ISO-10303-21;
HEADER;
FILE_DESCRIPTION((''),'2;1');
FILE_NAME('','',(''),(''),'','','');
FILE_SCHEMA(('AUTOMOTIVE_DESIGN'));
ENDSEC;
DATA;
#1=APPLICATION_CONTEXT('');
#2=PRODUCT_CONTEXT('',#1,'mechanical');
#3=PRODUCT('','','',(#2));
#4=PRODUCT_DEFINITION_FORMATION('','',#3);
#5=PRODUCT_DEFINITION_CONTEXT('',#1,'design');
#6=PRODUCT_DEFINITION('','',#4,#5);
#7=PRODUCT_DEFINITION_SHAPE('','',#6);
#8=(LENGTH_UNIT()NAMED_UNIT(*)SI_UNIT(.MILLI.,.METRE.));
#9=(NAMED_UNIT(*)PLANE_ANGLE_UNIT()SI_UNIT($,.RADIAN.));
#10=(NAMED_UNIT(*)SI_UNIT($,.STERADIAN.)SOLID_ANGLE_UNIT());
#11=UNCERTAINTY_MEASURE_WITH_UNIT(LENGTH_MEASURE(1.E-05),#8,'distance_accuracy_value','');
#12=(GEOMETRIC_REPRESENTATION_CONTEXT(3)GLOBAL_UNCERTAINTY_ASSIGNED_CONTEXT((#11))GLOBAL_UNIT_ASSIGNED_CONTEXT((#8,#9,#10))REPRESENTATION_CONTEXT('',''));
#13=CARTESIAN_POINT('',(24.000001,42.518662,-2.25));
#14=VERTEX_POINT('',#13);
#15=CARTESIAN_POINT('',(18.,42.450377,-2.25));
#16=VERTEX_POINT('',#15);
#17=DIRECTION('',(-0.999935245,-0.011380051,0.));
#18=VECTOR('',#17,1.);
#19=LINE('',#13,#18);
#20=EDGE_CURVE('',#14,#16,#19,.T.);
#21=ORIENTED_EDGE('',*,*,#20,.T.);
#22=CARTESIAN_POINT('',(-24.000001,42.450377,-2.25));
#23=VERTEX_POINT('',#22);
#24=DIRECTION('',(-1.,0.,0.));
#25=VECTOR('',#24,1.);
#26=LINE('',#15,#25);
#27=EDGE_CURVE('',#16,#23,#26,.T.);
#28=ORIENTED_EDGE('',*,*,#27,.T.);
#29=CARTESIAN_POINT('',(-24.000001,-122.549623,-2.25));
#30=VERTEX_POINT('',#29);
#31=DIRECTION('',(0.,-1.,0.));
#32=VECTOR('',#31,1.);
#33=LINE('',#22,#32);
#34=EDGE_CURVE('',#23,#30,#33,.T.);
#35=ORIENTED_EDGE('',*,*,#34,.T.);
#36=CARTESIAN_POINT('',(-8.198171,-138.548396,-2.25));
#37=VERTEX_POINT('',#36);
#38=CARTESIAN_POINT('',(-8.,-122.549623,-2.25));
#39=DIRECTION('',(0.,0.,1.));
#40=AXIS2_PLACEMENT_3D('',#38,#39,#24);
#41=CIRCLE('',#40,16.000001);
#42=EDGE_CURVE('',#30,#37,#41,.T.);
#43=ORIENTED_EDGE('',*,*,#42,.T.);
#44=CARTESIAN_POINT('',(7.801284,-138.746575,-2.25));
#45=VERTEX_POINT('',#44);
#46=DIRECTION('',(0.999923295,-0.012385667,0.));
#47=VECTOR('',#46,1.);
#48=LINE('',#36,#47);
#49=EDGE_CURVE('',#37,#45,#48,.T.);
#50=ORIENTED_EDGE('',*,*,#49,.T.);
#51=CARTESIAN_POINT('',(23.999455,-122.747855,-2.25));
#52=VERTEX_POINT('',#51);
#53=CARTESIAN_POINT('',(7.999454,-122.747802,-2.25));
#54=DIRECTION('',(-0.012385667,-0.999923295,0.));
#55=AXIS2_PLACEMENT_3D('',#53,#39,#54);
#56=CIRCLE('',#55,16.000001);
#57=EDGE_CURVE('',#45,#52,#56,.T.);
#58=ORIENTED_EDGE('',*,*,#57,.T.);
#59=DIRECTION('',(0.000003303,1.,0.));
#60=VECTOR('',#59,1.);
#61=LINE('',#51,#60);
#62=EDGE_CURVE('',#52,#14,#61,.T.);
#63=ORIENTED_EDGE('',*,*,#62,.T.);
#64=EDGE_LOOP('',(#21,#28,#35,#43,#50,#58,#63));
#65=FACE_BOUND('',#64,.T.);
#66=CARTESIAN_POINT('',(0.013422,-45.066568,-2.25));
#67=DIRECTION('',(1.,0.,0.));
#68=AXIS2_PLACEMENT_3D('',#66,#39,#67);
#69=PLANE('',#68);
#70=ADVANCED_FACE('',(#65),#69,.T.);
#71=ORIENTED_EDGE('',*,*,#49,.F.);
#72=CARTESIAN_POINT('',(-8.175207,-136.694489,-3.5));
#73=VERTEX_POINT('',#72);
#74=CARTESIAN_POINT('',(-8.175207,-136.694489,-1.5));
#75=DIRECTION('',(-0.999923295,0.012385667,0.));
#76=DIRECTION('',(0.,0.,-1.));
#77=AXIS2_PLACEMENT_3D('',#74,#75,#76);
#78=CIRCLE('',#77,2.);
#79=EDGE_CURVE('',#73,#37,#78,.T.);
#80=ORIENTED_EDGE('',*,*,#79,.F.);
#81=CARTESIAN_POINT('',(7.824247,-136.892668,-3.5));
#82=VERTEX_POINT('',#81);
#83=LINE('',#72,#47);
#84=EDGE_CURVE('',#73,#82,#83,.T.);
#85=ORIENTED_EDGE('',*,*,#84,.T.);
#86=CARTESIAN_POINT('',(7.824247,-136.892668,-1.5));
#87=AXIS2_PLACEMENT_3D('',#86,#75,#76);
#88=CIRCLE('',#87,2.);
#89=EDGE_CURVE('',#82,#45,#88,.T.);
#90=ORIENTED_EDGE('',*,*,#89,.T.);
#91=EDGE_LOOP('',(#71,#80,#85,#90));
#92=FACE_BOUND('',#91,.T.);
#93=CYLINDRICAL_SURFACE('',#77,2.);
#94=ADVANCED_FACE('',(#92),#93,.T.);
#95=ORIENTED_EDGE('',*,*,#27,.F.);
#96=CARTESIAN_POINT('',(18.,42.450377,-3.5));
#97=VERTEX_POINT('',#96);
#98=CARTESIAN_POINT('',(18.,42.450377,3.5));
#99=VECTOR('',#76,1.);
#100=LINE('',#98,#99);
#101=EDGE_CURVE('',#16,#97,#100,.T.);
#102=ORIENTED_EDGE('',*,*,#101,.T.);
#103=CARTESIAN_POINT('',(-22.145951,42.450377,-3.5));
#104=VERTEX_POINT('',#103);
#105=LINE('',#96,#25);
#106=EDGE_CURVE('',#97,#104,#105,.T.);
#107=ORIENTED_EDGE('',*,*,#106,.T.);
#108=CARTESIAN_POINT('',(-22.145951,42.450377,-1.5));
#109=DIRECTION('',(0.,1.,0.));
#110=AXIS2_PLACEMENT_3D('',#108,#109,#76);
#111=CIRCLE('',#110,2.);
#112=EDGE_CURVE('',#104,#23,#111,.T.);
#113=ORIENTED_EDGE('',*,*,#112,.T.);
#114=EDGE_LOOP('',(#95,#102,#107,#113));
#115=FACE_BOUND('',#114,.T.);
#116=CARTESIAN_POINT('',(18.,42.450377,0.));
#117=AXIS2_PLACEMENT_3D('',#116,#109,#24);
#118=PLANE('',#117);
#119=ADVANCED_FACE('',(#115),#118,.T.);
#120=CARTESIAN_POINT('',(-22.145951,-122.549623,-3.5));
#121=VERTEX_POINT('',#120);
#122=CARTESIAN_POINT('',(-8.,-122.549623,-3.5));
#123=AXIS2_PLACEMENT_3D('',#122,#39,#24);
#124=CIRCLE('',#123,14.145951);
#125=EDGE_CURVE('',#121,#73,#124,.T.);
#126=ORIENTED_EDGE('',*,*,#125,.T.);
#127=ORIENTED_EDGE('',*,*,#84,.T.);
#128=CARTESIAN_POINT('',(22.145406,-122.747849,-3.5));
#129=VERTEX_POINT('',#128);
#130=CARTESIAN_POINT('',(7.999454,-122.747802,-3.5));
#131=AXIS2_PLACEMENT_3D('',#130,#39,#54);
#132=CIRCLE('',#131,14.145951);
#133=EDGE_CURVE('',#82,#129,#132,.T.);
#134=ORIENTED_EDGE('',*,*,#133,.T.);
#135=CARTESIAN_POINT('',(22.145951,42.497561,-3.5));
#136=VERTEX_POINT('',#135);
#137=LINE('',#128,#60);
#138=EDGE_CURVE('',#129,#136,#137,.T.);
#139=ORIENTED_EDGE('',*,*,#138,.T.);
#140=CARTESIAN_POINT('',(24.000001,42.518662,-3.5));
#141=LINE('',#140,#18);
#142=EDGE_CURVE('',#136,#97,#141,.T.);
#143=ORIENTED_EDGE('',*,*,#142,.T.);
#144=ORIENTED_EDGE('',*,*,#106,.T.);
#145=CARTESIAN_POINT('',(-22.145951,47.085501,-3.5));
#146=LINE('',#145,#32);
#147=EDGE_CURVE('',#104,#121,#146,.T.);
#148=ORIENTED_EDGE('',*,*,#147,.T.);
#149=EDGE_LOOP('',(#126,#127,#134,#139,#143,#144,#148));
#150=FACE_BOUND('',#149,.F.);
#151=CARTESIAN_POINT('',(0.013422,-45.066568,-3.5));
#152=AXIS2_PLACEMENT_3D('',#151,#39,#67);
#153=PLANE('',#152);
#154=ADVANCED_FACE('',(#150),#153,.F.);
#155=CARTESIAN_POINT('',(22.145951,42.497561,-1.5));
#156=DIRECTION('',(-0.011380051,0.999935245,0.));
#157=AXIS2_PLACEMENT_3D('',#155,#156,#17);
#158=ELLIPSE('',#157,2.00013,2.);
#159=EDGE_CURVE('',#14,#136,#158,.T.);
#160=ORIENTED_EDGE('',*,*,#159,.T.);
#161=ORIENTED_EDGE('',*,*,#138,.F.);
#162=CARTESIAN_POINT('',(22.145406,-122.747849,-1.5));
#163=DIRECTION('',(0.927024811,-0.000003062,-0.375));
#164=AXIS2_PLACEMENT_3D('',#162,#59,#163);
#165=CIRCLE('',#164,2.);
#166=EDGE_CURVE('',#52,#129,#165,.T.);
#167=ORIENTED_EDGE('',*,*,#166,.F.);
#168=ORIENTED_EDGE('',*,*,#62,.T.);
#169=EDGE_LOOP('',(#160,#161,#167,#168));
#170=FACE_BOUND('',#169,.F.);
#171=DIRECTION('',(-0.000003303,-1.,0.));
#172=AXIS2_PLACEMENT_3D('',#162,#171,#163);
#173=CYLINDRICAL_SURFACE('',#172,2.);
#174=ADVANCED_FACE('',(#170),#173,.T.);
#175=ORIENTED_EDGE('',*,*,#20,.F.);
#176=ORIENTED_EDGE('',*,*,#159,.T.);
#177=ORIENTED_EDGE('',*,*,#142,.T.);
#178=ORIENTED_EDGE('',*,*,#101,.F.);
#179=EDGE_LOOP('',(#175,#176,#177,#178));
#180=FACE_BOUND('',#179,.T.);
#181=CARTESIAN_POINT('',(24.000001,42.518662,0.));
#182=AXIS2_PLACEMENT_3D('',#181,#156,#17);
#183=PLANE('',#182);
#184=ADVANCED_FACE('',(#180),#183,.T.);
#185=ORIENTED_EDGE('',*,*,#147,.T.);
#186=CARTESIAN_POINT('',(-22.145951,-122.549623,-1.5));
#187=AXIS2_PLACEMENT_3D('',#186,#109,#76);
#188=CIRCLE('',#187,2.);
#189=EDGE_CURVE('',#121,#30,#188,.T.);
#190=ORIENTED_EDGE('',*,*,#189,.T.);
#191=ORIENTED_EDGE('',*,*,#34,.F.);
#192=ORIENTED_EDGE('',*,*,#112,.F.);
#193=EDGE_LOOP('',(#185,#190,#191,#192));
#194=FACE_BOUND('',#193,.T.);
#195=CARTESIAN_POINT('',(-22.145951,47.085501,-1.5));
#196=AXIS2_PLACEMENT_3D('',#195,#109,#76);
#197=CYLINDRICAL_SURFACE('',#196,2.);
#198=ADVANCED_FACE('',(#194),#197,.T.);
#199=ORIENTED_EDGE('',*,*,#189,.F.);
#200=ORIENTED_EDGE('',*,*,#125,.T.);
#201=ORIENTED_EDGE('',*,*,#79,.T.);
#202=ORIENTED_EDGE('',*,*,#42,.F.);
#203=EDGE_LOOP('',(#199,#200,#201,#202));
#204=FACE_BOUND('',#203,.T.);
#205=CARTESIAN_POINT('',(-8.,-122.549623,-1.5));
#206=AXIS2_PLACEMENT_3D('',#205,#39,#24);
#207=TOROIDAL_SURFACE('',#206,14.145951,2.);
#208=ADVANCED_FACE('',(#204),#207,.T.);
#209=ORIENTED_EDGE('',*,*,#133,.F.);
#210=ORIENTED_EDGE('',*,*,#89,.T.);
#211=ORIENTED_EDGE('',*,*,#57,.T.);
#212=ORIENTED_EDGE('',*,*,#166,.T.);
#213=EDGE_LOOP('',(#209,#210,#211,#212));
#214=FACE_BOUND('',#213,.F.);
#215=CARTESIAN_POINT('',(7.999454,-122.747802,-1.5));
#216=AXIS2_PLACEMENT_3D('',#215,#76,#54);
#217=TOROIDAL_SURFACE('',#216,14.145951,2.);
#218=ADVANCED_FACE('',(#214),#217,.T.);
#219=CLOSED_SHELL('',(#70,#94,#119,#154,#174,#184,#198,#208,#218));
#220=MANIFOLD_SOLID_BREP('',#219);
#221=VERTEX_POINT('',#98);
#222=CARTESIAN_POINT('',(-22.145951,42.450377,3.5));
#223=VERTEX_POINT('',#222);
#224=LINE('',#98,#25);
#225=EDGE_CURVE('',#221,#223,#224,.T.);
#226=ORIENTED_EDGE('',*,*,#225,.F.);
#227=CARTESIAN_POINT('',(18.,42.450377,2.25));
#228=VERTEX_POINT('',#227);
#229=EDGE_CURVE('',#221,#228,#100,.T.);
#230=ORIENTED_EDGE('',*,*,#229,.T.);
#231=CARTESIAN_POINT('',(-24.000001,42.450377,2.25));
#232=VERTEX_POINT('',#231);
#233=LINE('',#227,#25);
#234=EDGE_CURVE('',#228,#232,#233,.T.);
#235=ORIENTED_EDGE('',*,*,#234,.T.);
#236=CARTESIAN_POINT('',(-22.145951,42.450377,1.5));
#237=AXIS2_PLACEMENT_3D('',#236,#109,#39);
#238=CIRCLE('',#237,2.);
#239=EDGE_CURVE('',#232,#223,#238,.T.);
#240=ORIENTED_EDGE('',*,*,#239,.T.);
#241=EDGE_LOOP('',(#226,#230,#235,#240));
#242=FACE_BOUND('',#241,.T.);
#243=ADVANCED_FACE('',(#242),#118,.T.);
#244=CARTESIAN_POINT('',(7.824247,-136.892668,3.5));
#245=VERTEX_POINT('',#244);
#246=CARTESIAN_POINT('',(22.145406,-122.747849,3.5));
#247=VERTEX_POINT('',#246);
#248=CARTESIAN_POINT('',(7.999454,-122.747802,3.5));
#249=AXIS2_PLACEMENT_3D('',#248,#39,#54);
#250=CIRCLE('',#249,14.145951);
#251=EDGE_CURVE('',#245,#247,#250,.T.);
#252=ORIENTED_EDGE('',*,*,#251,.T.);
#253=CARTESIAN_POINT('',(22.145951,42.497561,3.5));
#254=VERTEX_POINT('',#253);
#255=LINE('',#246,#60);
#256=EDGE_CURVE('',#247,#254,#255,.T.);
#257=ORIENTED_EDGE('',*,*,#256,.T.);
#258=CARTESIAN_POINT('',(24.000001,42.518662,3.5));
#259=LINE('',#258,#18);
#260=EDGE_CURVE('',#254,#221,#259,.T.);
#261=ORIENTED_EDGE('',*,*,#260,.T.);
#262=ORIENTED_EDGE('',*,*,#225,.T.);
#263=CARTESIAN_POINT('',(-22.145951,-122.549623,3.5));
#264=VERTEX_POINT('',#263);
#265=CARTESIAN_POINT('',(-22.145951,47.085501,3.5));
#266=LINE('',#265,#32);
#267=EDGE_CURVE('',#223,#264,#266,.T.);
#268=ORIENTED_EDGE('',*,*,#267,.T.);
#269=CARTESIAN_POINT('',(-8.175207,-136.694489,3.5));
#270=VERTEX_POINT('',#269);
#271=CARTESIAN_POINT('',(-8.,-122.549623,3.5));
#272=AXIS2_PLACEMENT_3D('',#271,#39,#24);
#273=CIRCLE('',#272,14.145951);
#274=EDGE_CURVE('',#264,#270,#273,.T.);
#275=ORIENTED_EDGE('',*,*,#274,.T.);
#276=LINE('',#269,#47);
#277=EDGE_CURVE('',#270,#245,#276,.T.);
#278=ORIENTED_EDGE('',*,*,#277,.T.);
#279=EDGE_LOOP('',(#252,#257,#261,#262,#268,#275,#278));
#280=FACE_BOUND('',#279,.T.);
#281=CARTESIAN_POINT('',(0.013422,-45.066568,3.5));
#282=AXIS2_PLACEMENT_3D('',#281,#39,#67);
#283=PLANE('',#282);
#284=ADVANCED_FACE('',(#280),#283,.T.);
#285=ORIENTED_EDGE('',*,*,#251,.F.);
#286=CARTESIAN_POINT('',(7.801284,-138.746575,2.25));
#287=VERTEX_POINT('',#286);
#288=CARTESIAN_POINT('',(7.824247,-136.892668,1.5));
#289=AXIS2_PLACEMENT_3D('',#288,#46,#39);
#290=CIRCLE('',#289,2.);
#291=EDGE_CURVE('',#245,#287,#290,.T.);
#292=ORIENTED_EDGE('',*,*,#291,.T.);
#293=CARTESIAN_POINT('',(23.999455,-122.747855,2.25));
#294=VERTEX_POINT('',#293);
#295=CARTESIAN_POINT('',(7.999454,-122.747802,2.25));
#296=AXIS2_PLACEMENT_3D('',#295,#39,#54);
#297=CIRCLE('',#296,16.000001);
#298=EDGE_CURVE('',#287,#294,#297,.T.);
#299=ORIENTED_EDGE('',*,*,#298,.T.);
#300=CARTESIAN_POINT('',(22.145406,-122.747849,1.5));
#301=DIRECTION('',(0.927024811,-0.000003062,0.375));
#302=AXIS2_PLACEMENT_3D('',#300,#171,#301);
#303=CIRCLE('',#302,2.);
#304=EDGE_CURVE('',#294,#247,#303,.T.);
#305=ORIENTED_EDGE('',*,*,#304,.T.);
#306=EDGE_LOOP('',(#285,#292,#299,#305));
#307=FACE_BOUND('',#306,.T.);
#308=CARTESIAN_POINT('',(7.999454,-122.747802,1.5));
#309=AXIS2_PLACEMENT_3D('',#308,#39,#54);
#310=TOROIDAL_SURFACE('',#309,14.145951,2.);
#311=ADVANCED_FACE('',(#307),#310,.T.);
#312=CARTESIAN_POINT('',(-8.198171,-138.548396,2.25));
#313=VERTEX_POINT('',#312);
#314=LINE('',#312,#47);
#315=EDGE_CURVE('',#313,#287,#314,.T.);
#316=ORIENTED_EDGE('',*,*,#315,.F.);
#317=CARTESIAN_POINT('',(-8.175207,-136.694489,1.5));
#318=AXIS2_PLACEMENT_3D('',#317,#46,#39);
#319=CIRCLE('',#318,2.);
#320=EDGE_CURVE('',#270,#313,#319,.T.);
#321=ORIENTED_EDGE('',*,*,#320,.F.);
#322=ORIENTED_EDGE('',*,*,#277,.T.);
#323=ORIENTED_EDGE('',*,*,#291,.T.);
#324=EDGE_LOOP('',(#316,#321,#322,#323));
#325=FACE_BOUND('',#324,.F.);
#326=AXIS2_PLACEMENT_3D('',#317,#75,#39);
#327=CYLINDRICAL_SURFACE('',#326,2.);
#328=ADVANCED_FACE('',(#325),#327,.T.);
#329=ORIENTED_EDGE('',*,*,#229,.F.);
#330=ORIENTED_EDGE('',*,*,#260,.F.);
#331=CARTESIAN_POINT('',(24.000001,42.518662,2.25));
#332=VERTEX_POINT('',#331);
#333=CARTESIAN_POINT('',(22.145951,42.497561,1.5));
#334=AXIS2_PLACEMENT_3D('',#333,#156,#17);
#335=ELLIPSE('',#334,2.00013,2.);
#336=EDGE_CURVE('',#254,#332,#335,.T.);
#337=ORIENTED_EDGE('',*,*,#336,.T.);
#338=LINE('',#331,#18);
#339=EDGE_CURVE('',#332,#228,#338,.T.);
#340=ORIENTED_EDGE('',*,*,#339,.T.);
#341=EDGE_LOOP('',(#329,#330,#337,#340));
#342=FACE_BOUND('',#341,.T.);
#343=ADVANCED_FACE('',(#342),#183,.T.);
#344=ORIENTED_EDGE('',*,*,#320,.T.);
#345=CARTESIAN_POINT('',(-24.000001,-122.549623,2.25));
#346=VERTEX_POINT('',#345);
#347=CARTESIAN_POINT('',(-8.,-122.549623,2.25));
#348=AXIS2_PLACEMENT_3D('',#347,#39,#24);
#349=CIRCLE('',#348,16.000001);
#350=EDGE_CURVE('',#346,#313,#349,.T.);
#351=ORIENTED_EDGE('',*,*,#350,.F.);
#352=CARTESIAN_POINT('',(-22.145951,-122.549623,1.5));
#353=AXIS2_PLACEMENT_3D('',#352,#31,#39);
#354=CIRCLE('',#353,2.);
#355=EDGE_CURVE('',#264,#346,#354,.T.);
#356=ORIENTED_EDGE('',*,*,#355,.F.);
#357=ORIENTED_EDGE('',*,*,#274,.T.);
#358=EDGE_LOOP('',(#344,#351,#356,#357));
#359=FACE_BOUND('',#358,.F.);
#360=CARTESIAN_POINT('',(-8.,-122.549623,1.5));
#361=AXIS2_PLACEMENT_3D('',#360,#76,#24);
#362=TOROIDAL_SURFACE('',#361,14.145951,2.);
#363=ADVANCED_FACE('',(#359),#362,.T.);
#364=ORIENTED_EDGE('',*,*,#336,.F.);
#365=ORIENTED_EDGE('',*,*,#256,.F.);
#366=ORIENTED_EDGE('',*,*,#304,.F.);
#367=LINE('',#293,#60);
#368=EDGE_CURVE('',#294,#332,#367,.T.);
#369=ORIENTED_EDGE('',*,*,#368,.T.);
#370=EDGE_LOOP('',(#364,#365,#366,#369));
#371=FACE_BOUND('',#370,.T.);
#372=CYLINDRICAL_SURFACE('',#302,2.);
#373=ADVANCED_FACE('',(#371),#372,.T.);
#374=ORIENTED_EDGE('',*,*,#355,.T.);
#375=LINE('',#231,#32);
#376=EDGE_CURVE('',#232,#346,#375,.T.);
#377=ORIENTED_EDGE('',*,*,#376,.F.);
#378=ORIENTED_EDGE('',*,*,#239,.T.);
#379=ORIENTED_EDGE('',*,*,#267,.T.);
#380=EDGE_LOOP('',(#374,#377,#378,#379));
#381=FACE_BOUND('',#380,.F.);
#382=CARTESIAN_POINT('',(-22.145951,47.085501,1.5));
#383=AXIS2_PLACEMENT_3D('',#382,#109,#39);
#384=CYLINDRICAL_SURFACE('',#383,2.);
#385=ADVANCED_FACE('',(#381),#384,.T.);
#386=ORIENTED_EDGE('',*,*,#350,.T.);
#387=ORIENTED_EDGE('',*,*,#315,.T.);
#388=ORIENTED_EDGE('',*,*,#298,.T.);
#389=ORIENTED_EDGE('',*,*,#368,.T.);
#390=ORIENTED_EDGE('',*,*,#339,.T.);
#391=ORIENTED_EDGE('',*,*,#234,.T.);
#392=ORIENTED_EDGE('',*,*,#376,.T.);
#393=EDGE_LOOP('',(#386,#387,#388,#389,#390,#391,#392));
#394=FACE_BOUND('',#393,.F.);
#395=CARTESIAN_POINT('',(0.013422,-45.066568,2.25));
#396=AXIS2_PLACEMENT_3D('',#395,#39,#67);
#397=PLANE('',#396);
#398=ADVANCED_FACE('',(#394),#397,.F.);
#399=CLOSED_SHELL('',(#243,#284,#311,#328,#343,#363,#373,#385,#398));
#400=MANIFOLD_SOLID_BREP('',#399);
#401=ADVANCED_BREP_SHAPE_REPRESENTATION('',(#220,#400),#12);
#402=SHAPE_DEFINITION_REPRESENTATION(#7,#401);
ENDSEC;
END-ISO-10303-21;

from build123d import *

# Parameters (mm, degrees)
F1_DEPTH        = 3.5
F2_DEPTH        = 2.25
F3_T1_DEPTH     = 169.9016407579
F3_T3_DEPTH     = 16.0006816658
F3_T5_DEPTH     = 169.6351240544
F3_T8_ANGLE     = 90.7094753215
F3_T10_ANGLE    = 89.290335423
F3_S1_T1_DEPTH  = 169.9016407579
F3_S1_T3_DEPTH  = 16.0006816658
F3_S1_T5_DEPTH  = 169.6351240544
F3_S1_T8_ANGLE  = 90.7094753215
F3_S1_T10_ANGLE = 89.290335423


# Not quite as in the source:
# - a fillet or chamfer that OpenCascade refuses, or shapes differently, is made with other operations: its cross-section is extruded or revolved along the edge and cut away or added


with BuildPart() as f1:
    # F0 (on Top) → F1 (new body, symmetric)
    with BuildSketch(Plane.XY):
        with BuildLine():
            Line((18, 42.4503772799), (-18, 42.4503772799))
            Line((-18, 42.4503772799), (-24.0000008941, 42.4503772799))
            Line((-24.0000008941, 42.4503772799), (-24.0000008941, -122.5496227201))
            ThreePointArc((-24.0000008941, -122.5496227201), (-19.3835574329, -133.7930496347), (-8.1981706793, -138.5483963291))
            Line((-8.1981706793, -138.5483963291), (7.8012836493, -138.7465754402))
            ThreePointArc((7.8012836493, -138.7465754402), (19.2428624423, -134.1313778333), (23.9994552225, -122.7478546813))
            Line((23.9994552225, -122.7478546813), (24.0000011197, 42.5186620212))
            Line((24.0000011197, 42.5186620212), (18, 42.4503772799))
        make_face()
    extrude(amount=F1_DEPTH, both=True)

    # F0 (on Top) → F2 (cut, symmetric)
    with BuildSketch(Plane.XY):
        with BuildLine():
            Line((18, 42.4503772799), (-18, 42.4503772799))
            Line((-18, 42.4503772799), (-24.0000008941, 42.4503772799))
            Line((-24.0000008941, 42.4503772799), (-24.0000008941, -122.5496227201))
            ThreePointArc((-24.0000008941, -122.5496227201), (-19.3835574329, -133.7930496347), (-8.1981706793, -138.5483963291))
            Line((-8.1981706793, -138.5483963291), (7.8012836493, -138.7465754402))
            ThreePointArc((7.8012836493, -138.7465754402), (19.2428624423, -134.1313778333), (23.9994552225, -122.7478546813))
            Line((23.9994552225, -122.7478546813), (24.0000011197, 42.5186620212))
            Line((24.0000011197, 42.5186620212), (18, 42.4503772799))
        make_face()
    extrude(amount=F2_DEPTH, both=True, mode=Mode.SUBTRACT)

    # F3: fillet of radius 2 on 1 edges, made by hand

    # F3_s2 → F3_t1 (cut)
    with BuildSketch(Plane(origin=(-0.0004054521, -122.7477754066, 0), x_dir=(0, 0, 1), z_dir=(3.3031e-06, 1, 0))):
        with BuildLine():
            ThreePointArc((-2.25, 23.9998606748), (-3.1583123952, 23.2638450417), (-3.5, 22.145811053))
            Line((-3.5, 22.145811053), (-3.5, 23.9998606748))
            Line((-3.5, 23.9998606748), (-2.25, 23.9998606748))
        make_face()
    extrude(amount=F3_T1_DEPTH, mode=Mode.SUBTRACT)

    # F3_s4 → F3_t3 (cut)
    with BuildSketch(Plane(origin=(-6.4810304011, 0.0802780406, 0), x_dir=(0, 0, 1), z_dir=(0.9999232947, -0.0123856668, 0))):
        with BuildLine():
            ThreePointArc((-3.5, 136.7852591194), (-3.1583123952, 137.9032931082), (-2.25, 138.6393087412))
            Line((-2.25, 138.6393087412), (-3.5, 138.6393087412))
            Line((-3.5, 138.6393087412), (-3.5, 136.7852591194))
        make_face()
    extrude(amount=F3_T3_DEPTH, mode=Mode.SUBTRACT)

    # F3_s6 → F3_t5 (cut)
    with BuildSketch(Plane.XZ.offset(-47.0855013343)):
        with BuildLine():
            ThreePointArc((-22.1459512723, -3.5), (-23.263985261, -3.1583123952), (-24.0000008941, -2.25))
            Line((-24.0000008941, -2.25), (-24.0000008941, -3.5))
            Line((-24.0000008941, -3.5), (-22.1459512723, -3.5))
        make_face()
    extrude(amount=F3_T5_DEPTH, mode=Mode.SUBTRACT)

    # F3_s7 → F3_t8 (revolve, cut)
    with BuildSketch(Plane(origin=(9.5184239274, -0.1179010705, 0), x_dir=(0, 0, 1), z_dir=(-0.9999232947, 0.0123856668, 0))):
        with BuildLine():
            ThreePointArc((-2.25, -138.6393087412), (-3.1583123952, -137.9032931082), (-3.5, -136.7852591194))
            Line((-3.5, -136.7852591194), (-3.5, -138.6393087412))
            Line((-3.5, -138.6393087412), (-2.25, -138.6393087412))
        make_face()
    revolve(axis=Axis((7.9994543285, -122.7478018312, -3.5), (0, 0, 1)), revolution_arc=F3_T8_ANGLE, mode=Mode.SUBTRACT)

    # F3_s9 → F3_t10 (revolve, cut)
    with BuildSketch(Plane.XZ.offset(122.5496227201)):
        with BuildLine():
            ThreePointArc((-22.1459512723, -3.5), (-23.263985261, -3.1583123952), (-24.0000008941, -2.25))
            Line((-24.0000008941, -2.25), (-24.0000008941, -3.5))
            Line((-24.0000008941, -3.5), (-22.1459512723, -3.5))
        make_face()
    revolve(axis=Axis((-8, -122.5496227201, -3.5), (0, 0, 1)), revolution_arc=F3_T10_ANGLE, mode=Mode.SUBTRACT)

    # F3#s1: fillet of radius 2 on 1 edges, made by hand

    # F3_s1_s2 → F3_s1_t1 (cut)
    with BuildSketch(Plane(origin=(-0.0004054521, -122.7477754066, 0), x_dir=(0, 0, 1), z_dir=(3.3031e-06, 1, 0))):
        with BuildLine():
            ThreePointArc((2.25, 23.9998606748), (3.1583123952, 23.2638450417), (3.5, 22.145811053))
            Line((3.5, 22.145811053), (3.5, 23.9998606748))
            Line((3.5, 23.9998606748), (2.25, 23.9998606748))
        make_face()
    extrude(amount=F3_S1_T1_DEPTH, mode=Mode.SUBTRACT)

    # F3_s1_s4 → F3_s1_t3 (cut)
    with BuildSketch(Plane(origin=(-6.4810304011, 0.0802780406, 0), x_dir=(0, 0, 1), z_dir=(0.9999232947, -0.0123856668, 0))):
        with BuildLine():
            ThreePointArc((3.5, 136.7852591194), (3.1583123952, 137.9032931082), (2.25, 138.6393087412))
            Line((2.25, 138.6393087412), (3.5, 138.6393087412))
            Line((3.5, 138.6393087412), (3.5, 136.7852591194))
        make_face()
    extrude(amount=F3_S1_T3_DEPTH, mode=Mode.SUBTRACT)

    # F3_s1_s6 → F3_s1_t5 (cut)
    with BuildSketch(Plane.XZ.offset(-47.0855013343)):
        with BuildLine():
            ThreePointArc((-22.1459512723, 3.5), (-23.263985261, 3.1583123952), (-24.0000008941, 2.25))
            Line((-24.0000008941, 2.25), (-24.0000008941, 3.5))
            Line((-24.0000008941, 3.5), (-22.1459512723, 3.5))
        make_face()
    extrude(amount=F3_S1_T5_DEPTH, mode=Mode.SUBTRACT)

    # F3_s1_s7 → F3_s1_t8 (revolve, cut)
    with BuildSketch(Plane(origin=(9.5184239274, -0.1179010705, 0), x_dir=(0, 0, 1), z_dir=(-0.9999232947, 0.0123856668, 0))):
        with BuildLine():
            ThreePointArc((2.25, -138.6393087412), (3.1583123952, -137.9032931082), (3.5, -136.7852591194))
            Line((3.5, -136.7852591194), (3.5, -138.6393087412))
            Line((3.5, -138.6393087412), (2.25, -138.6393087412))
        make_face()
    revolve(axis=Axis((7.9994543285, -122.7478018312, 3.5), (0, 0, 1)), revolution_arc=F3_S1_T8_ANGLE, mode=Mode.SUBTRACT)

    # F3_s1_s9 → F3_s1_t10 (revolve, cut)
    with BuildSketch(Plane.XZ.offset(122.5496227201)):
        with BuildLine():
            ThreePointArc((-22.1459512723, 3.5), (-23.263985261, 3.1583123952), (-24.0000008941, 2.25))
            Line((-24.0000008941, 2.25), (-24.0000008941, 3.5))
            Line((-24.0000008941, 3.5), (-22.1459512723, 3.5))
        make_face()
    revolve(axis=Axis((-8, -122.5496227201, 3.5), (0, 0, 1)), revolution_arc=F3_S1_T10_ANGLE, mode=Mode.SUBTRACT)


solid = f1.part
